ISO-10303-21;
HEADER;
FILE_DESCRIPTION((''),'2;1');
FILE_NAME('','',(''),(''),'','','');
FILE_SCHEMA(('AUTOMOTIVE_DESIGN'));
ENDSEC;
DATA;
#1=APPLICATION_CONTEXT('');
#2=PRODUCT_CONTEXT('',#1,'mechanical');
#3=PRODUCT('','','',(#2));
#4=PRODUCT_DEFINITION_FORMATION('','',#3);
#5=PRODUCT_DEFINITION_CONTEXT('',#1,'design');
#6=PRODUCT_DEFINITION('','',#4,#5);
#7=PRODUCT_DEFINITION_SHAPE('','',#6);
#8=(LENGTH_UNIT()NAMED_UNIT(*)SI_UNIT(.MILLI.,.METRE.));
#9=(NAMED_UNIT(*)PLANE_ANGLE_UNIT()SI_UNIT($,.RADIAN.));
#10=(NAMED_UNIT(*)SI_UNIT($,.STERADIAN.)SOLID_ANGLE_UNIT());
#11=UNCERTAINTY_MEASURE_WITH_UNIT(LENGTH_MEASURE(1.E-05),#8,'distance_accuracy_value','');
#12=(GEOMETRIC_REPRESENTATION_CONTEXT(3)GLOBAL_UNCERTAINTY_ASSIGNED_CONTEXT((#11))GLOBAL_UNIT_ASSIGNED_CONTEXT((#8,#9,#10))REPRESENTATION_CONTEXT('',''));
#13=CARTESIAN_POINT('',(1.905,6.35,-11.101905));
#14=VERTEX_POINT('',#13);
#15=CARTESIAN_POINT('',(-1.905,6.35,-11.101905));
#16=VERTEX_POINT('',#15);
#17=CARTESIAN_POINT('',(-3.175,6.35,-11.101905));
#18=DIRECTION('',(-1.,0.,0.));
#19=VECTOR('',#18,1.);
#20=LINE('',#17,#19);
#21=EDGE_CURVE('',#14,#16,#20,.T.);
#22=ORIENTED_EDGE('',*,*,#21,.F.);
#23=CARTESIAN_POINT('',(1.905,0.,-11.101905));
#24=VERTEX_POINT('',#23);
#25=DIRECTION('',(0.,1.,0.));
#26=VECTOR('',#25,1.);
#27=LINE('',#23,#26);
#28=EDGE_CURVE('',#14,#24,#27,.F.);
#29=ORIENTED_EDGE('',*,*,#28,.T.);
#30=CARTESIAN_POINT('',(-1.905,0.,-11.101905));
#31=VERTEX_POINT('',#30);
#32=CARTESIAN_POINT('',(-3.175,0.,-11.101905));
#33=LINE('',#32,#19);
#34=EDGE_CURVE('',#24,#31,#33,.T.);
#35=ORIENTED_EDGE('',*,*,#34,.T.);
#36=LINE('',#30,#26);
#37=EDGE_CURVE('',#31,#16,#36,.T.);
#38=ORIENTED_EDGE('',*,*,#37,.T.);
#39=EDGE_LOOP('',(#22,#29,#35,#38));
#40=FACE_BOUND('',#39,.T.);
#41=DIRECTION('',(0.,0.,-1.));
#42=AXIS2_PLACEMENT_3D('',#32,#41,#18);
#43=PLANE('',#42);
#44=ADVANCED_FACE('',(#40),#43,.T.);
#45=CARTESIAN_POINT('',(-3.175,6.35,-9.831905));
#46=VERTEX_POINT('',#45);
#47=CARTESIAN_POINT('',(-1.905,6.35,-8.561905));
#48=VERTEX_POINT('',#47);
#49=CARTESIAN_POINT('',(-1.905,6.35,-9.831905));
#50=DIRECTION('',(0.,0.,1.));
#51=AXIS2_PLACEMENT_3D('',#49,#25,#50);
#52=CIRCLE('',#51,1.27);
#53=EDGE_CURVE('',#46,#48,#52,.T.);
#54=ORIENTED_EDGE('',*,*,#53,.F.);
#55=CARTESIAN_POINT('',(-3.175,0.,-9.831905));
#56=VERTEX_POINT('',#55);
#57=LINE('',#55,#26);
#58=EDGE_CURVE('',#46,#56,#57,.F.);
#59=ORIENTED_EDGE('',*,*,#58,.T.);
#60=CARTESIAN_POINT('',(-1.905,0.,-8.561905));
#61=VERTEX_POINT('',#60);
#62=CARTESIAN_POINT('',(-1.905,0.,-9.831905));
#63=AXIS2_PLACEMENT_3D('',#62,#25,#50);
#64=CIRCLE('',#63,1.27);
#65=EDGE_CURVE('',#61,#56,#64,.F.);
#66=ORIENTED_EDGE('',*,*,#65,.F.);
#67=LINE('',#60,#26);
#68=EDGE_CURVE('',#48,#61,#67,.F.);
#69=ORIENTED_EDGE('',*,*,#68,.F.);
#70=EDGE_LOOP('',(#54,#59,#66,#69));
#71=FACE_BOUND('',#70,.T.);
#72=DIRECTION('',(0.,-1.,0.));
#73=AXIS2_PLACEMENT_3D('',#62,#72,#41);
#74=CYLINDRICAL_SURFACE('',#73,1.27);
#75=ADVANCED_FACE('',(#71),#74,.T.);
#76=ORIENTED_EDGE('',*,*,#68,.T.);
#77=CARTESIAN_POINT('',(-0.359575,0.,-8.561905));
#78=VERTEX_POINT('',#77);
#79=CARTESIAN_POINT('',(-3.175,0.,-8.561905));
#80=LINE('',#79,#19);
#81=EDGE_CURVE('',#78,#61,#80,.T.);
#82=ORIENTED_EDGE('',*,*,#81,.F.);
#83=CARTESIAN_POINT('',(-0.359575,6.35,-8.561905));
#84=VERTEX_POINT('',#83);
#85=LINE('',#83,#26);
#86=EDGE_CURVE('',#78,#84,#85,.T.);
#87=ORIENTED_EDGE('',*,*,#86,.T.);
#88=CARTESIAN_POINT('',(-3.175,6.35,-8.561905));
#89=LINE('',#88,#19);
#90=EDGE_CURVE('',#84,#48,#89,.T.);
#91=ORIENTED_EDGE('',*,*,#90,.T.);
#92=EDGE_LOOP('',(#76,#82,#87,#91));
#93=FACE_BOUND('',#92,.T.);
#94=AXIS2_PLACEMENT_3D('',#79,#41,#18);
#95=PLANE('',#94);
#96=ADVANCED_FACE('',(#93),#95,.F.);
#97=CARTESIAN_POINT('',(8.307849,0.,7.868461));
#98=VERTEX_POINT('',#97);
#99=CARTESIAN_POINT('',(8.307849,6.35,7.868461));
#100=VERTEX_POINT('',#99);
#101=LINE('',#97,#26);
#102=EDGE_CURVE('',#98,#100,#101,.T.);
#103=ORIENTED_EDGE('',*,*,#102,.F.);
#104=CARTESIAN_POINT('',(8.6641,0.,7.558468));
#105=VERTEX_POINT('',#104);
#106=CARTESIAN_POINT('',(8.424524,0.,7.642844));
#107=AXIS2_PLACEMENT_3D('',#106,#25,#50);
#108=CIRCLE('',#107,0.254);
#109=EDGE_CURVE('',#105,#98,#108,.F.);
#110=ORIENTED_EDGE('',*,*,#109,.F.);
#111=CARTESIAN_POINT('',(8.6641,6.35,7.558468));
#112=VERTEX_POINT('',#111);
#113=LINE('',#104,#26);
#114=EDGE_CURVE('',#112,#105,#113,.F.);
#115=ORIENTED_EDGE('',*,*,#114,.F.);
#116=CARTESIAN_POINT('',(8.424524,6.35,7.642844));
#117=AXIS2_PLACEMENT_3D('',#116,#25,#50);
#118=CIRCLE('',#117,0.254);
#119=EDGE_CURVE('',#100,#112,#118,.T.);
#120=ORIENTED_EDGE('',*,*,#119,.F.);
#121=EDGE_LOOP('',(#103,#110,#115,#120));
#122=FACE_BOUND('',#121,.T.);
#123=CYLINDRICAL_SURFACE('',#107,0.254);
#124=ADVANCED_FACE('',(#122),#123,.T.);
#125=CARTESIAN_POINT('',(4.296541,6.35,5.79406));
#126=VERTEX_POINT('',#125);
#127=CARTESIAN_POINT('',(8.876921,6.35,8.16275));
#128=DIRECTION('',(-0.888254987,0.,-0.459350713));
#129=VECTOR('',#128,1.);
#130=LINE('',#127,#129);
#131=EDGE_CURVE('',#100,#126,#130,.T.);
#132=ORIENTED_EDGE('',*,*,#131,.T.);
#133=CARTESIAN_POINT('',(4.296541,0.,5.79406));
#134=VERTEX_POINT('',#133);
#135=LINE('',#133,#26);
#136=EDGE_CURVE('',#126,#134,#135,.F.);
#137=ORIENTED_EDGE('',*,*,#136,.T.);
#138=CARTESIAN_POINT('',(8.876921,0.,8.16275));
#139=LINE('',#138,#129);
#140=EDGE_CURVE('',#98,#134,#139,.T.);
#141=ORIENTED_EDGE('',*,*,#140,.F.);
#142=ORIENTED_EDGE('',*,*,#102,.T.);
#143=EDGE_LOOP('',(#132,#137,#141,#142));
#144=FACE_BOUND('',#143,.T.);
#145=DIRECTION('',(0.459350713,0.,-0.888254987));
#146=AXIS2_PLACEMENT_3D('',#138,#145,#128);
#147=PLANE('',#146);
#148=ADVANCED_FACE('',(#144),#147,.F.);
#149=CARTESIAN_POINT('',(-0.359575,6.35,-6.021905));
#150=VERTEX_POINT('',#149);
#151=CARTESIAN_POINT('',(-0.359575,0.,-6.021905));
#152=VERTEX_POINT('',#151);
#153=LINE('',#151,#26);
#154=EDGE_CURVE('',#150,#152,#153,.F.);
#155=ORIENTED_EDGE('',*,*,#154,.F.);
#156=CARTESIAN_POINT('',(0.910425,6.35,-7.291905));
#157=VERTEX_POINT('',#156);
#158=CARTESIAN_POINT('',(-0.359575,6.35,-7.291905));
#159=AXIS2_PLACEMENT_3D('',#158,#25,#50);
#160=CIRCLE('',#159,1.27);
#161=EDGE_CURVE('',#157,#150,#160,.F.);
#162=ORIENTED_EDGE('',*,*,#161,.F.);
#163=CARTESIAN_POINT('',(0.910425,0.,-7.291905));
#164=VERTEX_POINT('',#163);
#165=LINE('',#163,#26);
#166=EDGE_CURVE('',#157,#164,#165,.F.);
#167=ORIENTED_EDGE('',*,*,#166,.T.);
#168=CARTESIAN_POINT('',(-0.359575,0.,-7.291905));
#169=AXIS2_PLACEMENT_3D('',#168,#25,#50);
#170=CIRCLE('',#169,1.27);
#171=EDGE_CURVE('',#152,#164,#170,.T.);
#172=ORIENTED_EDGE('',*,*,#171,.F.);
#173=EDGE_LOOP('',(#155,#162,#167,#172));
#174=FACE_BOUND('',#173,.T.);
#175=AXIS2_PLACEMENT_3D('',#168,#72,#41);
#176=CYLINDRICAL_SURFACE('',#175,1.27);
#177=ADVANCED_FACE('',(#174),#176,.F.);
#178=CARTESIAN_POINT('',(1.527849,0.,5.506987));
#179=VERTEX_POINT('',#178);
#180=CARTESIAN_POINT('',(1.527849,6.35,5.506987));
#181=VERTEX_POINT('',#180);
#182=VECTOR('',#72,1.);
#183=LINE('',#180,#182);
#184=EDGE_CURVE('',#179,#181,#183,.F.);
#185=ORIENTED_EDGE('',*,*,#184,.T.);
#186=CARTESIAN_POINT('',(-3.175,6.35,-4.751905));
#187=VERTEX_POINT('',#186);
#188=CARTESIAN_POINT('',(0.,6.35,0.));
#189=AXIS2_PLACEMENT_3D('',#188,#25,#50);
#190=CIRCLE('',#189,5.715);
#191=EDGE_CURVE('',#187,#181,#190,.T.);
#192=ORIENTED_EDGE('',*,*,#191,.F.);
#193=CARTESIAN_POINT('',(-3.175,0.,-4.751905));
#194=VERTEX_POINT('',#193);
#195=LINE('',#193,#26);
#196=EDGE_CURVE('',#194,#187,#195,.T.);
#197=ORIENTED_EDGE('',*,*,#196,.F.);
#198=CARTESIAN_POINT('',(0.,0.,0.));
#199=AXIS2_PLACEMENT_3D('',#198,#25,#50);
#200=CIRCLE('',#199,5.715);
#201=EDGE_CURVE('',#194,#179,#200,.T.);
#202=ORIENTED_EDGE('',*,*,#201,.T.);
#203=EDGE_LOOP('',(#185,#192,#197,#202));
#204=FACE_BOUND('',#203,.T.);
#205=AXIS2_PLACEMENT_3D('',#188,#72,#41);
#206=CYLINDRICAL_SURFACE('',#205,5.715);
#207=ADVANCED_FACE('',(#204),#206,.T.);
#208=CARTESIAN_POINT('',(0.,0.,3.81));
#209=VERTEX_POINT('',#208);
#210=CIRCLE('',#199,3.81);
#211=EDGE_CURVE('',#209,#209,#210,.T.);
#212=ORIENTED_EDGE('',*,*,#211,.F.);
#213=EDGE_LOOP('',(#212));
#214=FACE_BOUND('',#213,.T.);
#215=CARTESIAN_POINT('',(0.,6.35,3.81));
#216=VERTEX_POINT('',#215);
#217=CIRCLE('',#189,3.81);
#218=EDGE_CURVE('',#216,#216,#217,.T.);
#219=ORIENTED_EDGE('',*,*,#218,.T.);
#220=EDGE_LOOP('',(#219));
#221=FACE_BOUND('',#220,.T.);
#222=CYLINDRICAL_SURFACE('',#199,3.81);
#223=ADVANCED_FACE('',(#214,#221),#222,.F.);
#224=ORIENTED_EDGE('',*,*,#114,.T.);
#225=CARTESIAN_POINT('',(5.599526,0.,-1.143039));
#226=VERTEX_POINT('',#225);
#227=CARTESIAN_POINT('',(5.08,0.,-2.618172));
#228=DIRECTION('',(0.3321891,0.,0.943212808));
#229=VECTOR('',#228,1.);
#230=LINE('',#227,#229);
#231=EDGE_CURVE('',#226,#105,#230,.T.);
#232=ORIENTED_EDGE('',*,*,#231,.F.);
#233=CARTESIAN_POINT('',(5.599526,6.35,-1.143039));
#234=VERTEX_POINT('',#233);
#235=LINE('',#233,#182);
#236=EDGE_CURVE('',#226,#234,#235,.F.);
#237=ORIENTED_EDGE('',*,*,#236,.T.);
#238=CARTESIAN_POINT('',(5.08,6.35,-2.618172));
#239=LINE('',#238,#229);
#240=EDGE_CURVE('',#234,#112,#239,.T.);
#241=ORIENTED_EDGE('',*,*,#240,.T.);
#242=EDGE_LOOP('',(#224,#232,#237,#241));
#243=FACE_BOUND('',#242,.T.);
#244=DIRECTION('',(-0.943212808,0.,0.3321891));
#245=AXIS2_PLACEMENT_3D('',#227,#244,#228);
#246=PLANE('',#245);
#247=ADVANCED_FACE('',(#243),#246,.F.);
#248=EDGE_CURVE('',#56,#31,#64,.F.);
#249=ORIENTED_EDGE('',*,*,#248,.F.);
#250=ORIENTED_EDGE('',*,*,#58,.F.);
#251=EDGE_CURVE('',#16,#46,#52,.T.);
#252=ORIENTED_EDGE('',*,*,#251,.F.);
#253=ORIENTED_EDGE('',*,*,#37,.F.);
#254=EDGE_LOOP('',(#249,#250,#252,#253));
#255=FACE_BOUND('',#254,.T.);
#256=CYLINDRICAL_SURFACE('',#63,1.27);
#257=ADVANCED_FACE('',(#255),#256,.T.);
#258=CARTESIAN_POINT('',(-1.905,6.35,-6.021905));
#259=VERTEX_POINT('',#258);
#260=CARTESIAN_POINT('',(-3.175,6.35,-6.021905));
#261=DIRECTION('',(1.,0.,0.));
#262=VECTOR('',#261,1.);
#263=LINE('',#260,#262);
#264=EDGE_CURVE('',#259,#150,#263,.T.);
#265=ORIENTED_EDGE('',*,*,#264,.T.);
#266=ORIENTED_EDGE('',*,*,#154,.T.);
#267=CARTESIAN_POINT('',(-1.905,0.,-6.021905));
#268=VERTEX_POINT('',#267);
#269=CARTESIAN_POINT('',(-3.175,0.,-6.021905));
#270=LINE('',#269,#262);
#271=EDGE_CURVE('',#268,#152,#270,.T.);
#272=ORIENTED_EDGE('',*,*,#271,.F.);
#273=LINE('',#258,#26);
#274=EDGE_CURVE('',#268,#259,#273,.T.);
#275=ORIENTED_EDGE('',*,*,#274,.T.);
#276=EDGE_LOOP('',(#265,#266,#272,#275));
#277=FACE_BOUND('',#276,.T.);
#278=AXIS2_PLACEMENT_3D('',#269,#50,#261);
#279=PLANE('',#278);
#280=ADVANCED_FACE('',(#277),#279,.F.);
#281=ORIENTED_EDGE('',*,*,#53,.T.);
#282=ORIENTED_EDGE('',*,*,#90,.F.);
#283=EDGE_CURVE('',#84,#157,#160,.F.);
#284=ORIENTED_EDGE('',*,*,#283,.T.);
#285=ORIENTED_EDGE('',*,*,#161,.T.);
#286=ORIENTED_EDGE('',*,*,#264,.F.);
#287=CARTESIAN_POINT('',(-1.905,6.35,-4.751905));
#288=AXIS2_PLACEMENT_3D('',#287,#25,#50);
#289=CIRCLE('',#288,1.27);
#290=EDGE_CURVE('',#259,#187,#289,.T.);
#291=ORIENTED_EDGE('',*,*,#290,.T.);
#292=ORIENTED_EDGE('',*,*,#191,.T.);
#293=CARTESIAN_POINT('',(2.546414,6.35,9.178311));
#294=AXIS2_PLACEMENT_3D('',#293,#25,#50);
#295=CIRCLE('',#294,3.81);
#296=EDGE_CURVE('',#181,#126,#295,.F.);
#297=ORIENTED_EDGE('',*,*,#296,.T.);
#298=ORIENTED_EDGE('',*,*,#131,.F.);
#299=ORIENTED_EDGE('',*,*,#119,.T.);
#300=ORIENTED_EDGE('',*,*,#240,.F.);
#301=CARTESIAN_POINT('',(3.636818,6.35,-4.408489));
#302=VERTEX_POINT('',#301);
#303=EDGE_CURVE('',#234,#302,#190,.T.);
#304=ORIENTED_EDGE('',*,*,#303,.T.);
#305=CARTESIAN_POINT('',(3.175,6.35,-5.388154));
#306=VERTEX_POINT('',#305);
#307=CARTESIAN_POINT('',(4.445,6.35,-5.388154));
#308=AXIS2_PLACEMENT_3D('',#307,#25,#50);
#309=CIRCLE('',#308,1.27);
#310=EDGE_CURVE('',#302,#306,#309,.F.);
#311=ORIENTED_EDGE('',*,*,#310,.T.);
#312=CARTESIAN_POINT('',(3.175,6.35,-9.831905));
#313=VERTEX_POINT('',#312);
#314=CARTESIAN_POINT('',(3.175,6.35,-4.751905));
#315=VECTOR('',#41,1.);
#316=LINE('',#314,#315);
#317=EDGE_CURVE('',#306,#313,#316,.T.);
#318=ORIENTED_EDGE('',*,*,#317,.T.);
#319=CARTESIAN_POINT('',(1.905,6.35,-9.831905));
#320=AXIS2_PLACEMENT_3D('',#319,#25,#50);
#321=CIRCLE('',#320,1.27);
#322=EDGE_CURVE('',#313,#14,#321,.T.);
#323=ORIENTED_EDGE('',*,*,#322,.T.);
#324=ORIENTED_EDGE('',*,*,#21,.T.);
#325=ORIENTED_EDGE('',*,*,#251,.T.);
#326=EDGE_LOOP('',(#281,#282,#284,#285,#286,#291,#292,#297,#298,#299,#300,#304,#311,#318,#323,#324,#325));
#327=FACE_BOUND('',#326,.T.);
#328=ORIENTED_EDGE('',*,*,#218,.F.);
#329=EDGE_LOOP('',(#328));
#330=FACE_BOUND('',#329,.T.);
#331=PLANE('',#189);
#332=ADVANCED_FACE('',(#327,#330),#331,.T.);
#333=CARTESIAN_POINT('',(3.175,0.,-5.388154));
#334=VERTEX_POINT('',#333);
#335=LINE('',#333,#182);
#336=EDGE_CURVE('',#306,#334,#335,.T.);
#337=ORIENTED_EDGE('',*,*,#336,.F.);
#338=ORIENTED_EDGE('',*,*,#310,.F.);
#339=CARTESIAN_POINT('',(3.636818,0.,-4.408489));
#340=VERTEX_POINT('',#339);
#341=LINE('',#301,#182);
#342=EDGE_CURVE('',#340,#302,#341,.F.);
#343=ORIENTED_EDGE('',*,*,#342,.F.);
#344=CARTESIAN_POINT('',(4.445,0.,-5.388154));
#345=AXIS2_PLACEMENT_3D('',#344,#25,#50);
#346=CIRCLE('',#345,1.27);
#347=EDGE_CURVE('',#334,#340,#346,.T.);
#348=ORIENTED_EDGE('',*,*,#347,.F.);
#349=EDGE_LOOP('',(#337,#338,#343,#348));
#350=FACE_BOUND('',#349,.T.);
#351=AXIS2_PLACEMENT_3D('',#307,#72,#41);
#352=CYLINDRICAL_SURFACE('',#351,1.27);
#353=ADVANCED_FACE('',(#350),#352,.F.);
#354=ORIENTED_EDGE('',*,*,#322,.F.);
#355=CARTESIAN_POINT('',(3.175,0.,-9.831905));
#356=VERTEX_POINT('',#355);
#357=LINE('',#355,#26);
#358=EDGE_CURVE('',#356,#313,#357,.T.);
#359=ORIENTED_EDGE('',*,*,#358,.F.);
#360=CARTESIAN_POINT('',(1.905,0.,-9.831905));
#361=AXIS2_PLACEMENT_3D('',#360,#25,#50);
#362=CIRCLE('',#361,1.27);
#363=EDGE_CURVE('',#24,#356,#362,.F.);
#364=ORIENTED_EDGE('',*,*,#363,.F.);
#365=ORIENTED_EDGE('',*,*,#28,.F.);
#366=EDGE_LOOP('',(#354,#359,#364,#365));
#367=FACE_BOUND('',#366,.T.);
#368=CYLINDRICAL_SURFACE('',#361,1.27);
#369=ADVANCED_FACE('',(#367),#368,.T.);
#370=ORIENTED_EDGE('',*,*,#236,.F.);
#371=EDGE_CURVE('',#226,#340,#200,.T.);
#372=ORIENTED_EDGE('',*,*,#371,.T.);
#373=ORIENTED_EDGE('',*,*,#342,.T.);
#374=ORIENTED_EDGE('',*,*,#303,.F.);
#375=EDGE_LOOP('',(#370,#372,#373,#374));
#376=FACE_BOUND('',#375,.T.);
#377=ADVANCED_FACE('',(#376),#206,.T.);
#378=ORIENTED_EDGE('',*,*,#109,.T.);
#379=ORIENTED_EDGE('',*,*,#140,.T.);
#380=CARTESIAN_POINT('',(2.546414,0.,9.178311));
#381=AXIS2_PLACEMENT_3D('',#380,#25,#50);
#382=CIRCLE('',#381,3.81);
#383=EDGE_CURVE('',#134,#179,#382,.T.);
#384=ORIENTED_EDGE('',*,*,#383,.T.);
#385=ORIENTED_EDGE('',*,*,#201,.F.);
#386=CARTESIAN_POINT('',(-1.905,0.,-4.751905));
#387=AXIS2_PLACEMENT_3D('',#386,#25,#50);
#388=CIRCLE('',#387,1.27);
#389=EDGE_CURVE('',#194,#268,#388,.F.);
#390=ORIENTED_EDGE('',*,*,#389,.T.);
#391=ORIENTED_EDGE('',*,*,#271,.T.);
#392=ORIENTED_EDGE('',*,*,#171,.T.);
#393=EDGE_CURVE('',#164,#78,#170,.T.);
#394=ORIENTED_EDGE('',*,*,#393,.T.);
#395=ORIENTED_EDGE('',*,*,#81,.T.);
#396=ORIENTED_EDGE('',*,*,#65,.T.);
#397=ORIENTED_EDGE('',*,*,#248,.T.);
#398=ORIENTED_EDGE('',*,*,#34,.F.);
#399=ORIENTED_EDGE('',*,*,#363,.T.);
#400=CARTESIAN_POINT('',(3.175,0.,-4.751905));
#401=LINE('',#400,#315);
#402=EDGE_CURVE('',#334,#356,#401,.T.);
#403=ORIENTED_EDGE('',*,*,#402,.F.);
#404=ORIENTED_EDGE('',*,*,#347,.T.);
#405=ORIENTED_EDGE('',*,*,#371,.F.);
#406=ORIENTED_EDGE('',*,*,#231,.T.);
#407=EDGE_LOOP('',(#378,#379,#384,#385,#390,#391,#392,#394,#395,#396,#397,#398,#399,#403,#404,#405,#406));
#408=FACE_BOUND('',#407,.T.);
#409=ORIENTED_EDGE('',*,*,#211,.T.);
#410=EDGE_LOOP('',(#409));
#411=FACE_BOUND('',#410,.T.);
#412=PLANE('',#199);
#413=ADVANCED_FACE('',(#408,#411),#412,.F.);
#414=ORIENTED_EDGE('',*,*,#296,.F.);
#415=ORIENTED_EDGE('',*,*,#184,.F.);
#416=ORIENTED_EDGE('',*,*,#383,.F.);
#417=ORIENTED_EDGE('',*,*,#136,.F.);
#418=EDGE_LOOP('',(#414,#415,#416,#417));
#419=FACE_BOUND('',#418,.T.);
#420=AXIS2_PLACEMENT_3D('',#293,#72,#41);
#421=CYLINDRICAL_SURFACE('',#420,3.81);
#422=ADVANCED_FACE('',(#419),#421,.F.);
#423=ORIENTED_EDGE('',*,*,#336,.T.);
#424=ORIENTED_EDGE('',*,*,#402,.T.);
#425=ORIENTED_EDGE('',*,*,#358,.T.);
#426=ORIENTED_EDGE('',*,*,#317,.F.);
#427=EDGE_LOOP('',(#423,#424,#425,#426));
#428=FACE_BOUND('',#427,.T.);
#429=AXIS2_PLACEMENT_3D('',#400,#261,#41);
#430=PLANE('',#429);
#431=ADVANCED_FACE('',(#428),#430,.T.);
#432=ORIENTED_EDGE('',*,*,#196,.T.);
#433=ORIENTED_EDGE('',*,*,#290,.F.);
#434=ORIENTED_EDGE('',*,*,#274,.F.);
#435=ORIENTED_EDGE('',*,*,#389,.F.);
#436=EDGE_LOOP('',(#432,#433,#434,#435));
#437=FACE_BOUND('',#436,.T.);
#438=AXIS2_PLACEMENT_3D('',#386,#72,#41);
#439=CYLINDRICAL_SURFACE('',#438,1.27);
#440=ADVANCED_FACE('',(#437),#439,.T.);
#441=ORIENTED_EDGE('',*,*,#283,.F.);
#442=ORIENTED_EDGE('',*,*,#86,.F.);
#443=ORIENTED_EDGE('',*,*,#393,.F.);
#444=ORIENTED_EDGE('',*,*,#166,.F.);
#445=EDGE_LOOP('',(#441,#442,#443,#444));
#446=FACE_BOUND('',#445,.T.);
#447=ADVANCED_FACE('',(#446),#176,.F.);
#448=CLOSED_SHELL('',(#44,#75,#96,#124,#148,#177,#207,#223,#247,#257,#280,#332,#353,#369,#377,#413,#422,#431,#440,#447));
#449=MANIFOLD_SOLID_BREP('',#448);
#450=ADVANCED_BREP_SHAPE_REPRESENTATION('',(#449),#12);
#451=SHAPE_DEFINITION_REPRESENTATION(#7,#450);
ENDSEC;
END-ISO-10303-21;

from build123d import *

# Parameters (mm, degrees)
SKETCH1_R           = 5.715
BOSS_EXTRUDE1_DEPTH = 6.35
SKETCH3_R           = 3.81
CUT_EXTRUDE1_DEPTH  = 6.35
BOSS_EXTRUDE3_DEPTH = 6.35
FILLET2_R           = 0.254
FILLET3_R           = 3.81
SKETCH4_W           = 6.35
SKETCH4_H           = 6.35
BOSS_EXTRUDE4_DEPTH = 6.35
SKETCH5_W           = 4.085425086
SKETCH5_H           = 2.54
CUT_EXTRUDE2_DEPTH  = 6.35
FILLET4_R           = 1.27


with BuildPart() as part:
    # Sketch1 → Boss-Extrude1 (new body)
    with BuildSketch(Plane(origin=(0, 0, 0), x_dir=(1, 0, 0), z_dir=(0, 1, 0))):
        with Locations(Location((0, 0, 0), (0, 0, 270))):
            Circle(SKETCH1_R)
    extrude(amount=BOSS_EXTRUDE1_DEPTH)

    # Sketch3 → Cut-Extrude1 (cut)
    with BuildSketch(Plane(origin=(0, 6.35, 0), x_dir=(1, 0, 0), z_dir=(0, 1, 0))):
        with Locations(Location((0, 0, 0), (0, 0, 270))):
            Circle(SKETCH3_R)
    extrude(amount=-CUT_EXTRUDE1_DEPTH, mode=Mode.SUBTRACT)

    # Sketch2 → Boss-Extrude3 (add)
    with BuildSketch(Plane(origin=(0, 6.35, 0), x_dir=(1, 0, 0), z_dir=(0, 1, 0))):
        Polygon((5.08, 2.618172072), (8.876921418, -8.162750326), (2.764587199, -5.001827928), align=None)
    extrude(amount=-BOSS_EXTRUDE3_DEPTH)

    # Fillet2
    fillet2_edges = [part.edges().sort_by_distance(p)[0] for p in [
        (8.876921418, 3.175, 8.162750326),
    ]]
    fillet(fillet2_edges, radius=FILLET2_R)

    # Fillet3
    fillet3_edges = [part.edges().sort_by_distance(p)[0] for p in [
        (2.764587199, 3.175, 5.001827928),
    ]]
    fillet(fillet3_edges, radius=FILLET3_R)

    # Sketch4 → Boss-Extrude4 (add)
    with BuildSketch(Plane(origin=(0, 6.35, 0), x_dir=(1, 0, 0), z_dir=(0, 1, 0))):
        with Locations((0, 7.926904881)):
            Rectangle(SKETCH4_W, SKETCH4_H)
    extrude(amount=-BOSS_EXTRUDE4_DEPTH)

    # Sketch5 → Cut-Extrude2 (cut)
    with BuildSketch(Plane(origin=(0, 6.35, 0), x_dir=(1, 0, 0), z_dir=(0, 1, 0))):
        with Locations((-1.132287457, 7.291904881)):
            Rectangle(SKETCH5_W, SKETCH5_H)
    extrude(amount=-CUT_EXTRUDE2_DEPTH, mode=Mode.SUBTRACT)

    # Fillet4
    fillet4_edges = [part.edges().sort_by_distance(p)[0] for p in [
        (3.175, 3.175, -4.751904881),
        (-3.175, 3.175, -6.021904881),
        (0.910425086, 3.175, -6.021904881),
        (0.910425086, 3.175, -8.561904881),
        (-3.175, 3.175, -8.561904881),
        (-3.175, 3.175, -11.101904881),
        (3.175, 3.175, -11.101904881),
    ]]
    fillet(fillet4_edges, radius=FILLET4_R - 0.0001)  # a hair under: the kernel refuses the full size


solid = part.part
